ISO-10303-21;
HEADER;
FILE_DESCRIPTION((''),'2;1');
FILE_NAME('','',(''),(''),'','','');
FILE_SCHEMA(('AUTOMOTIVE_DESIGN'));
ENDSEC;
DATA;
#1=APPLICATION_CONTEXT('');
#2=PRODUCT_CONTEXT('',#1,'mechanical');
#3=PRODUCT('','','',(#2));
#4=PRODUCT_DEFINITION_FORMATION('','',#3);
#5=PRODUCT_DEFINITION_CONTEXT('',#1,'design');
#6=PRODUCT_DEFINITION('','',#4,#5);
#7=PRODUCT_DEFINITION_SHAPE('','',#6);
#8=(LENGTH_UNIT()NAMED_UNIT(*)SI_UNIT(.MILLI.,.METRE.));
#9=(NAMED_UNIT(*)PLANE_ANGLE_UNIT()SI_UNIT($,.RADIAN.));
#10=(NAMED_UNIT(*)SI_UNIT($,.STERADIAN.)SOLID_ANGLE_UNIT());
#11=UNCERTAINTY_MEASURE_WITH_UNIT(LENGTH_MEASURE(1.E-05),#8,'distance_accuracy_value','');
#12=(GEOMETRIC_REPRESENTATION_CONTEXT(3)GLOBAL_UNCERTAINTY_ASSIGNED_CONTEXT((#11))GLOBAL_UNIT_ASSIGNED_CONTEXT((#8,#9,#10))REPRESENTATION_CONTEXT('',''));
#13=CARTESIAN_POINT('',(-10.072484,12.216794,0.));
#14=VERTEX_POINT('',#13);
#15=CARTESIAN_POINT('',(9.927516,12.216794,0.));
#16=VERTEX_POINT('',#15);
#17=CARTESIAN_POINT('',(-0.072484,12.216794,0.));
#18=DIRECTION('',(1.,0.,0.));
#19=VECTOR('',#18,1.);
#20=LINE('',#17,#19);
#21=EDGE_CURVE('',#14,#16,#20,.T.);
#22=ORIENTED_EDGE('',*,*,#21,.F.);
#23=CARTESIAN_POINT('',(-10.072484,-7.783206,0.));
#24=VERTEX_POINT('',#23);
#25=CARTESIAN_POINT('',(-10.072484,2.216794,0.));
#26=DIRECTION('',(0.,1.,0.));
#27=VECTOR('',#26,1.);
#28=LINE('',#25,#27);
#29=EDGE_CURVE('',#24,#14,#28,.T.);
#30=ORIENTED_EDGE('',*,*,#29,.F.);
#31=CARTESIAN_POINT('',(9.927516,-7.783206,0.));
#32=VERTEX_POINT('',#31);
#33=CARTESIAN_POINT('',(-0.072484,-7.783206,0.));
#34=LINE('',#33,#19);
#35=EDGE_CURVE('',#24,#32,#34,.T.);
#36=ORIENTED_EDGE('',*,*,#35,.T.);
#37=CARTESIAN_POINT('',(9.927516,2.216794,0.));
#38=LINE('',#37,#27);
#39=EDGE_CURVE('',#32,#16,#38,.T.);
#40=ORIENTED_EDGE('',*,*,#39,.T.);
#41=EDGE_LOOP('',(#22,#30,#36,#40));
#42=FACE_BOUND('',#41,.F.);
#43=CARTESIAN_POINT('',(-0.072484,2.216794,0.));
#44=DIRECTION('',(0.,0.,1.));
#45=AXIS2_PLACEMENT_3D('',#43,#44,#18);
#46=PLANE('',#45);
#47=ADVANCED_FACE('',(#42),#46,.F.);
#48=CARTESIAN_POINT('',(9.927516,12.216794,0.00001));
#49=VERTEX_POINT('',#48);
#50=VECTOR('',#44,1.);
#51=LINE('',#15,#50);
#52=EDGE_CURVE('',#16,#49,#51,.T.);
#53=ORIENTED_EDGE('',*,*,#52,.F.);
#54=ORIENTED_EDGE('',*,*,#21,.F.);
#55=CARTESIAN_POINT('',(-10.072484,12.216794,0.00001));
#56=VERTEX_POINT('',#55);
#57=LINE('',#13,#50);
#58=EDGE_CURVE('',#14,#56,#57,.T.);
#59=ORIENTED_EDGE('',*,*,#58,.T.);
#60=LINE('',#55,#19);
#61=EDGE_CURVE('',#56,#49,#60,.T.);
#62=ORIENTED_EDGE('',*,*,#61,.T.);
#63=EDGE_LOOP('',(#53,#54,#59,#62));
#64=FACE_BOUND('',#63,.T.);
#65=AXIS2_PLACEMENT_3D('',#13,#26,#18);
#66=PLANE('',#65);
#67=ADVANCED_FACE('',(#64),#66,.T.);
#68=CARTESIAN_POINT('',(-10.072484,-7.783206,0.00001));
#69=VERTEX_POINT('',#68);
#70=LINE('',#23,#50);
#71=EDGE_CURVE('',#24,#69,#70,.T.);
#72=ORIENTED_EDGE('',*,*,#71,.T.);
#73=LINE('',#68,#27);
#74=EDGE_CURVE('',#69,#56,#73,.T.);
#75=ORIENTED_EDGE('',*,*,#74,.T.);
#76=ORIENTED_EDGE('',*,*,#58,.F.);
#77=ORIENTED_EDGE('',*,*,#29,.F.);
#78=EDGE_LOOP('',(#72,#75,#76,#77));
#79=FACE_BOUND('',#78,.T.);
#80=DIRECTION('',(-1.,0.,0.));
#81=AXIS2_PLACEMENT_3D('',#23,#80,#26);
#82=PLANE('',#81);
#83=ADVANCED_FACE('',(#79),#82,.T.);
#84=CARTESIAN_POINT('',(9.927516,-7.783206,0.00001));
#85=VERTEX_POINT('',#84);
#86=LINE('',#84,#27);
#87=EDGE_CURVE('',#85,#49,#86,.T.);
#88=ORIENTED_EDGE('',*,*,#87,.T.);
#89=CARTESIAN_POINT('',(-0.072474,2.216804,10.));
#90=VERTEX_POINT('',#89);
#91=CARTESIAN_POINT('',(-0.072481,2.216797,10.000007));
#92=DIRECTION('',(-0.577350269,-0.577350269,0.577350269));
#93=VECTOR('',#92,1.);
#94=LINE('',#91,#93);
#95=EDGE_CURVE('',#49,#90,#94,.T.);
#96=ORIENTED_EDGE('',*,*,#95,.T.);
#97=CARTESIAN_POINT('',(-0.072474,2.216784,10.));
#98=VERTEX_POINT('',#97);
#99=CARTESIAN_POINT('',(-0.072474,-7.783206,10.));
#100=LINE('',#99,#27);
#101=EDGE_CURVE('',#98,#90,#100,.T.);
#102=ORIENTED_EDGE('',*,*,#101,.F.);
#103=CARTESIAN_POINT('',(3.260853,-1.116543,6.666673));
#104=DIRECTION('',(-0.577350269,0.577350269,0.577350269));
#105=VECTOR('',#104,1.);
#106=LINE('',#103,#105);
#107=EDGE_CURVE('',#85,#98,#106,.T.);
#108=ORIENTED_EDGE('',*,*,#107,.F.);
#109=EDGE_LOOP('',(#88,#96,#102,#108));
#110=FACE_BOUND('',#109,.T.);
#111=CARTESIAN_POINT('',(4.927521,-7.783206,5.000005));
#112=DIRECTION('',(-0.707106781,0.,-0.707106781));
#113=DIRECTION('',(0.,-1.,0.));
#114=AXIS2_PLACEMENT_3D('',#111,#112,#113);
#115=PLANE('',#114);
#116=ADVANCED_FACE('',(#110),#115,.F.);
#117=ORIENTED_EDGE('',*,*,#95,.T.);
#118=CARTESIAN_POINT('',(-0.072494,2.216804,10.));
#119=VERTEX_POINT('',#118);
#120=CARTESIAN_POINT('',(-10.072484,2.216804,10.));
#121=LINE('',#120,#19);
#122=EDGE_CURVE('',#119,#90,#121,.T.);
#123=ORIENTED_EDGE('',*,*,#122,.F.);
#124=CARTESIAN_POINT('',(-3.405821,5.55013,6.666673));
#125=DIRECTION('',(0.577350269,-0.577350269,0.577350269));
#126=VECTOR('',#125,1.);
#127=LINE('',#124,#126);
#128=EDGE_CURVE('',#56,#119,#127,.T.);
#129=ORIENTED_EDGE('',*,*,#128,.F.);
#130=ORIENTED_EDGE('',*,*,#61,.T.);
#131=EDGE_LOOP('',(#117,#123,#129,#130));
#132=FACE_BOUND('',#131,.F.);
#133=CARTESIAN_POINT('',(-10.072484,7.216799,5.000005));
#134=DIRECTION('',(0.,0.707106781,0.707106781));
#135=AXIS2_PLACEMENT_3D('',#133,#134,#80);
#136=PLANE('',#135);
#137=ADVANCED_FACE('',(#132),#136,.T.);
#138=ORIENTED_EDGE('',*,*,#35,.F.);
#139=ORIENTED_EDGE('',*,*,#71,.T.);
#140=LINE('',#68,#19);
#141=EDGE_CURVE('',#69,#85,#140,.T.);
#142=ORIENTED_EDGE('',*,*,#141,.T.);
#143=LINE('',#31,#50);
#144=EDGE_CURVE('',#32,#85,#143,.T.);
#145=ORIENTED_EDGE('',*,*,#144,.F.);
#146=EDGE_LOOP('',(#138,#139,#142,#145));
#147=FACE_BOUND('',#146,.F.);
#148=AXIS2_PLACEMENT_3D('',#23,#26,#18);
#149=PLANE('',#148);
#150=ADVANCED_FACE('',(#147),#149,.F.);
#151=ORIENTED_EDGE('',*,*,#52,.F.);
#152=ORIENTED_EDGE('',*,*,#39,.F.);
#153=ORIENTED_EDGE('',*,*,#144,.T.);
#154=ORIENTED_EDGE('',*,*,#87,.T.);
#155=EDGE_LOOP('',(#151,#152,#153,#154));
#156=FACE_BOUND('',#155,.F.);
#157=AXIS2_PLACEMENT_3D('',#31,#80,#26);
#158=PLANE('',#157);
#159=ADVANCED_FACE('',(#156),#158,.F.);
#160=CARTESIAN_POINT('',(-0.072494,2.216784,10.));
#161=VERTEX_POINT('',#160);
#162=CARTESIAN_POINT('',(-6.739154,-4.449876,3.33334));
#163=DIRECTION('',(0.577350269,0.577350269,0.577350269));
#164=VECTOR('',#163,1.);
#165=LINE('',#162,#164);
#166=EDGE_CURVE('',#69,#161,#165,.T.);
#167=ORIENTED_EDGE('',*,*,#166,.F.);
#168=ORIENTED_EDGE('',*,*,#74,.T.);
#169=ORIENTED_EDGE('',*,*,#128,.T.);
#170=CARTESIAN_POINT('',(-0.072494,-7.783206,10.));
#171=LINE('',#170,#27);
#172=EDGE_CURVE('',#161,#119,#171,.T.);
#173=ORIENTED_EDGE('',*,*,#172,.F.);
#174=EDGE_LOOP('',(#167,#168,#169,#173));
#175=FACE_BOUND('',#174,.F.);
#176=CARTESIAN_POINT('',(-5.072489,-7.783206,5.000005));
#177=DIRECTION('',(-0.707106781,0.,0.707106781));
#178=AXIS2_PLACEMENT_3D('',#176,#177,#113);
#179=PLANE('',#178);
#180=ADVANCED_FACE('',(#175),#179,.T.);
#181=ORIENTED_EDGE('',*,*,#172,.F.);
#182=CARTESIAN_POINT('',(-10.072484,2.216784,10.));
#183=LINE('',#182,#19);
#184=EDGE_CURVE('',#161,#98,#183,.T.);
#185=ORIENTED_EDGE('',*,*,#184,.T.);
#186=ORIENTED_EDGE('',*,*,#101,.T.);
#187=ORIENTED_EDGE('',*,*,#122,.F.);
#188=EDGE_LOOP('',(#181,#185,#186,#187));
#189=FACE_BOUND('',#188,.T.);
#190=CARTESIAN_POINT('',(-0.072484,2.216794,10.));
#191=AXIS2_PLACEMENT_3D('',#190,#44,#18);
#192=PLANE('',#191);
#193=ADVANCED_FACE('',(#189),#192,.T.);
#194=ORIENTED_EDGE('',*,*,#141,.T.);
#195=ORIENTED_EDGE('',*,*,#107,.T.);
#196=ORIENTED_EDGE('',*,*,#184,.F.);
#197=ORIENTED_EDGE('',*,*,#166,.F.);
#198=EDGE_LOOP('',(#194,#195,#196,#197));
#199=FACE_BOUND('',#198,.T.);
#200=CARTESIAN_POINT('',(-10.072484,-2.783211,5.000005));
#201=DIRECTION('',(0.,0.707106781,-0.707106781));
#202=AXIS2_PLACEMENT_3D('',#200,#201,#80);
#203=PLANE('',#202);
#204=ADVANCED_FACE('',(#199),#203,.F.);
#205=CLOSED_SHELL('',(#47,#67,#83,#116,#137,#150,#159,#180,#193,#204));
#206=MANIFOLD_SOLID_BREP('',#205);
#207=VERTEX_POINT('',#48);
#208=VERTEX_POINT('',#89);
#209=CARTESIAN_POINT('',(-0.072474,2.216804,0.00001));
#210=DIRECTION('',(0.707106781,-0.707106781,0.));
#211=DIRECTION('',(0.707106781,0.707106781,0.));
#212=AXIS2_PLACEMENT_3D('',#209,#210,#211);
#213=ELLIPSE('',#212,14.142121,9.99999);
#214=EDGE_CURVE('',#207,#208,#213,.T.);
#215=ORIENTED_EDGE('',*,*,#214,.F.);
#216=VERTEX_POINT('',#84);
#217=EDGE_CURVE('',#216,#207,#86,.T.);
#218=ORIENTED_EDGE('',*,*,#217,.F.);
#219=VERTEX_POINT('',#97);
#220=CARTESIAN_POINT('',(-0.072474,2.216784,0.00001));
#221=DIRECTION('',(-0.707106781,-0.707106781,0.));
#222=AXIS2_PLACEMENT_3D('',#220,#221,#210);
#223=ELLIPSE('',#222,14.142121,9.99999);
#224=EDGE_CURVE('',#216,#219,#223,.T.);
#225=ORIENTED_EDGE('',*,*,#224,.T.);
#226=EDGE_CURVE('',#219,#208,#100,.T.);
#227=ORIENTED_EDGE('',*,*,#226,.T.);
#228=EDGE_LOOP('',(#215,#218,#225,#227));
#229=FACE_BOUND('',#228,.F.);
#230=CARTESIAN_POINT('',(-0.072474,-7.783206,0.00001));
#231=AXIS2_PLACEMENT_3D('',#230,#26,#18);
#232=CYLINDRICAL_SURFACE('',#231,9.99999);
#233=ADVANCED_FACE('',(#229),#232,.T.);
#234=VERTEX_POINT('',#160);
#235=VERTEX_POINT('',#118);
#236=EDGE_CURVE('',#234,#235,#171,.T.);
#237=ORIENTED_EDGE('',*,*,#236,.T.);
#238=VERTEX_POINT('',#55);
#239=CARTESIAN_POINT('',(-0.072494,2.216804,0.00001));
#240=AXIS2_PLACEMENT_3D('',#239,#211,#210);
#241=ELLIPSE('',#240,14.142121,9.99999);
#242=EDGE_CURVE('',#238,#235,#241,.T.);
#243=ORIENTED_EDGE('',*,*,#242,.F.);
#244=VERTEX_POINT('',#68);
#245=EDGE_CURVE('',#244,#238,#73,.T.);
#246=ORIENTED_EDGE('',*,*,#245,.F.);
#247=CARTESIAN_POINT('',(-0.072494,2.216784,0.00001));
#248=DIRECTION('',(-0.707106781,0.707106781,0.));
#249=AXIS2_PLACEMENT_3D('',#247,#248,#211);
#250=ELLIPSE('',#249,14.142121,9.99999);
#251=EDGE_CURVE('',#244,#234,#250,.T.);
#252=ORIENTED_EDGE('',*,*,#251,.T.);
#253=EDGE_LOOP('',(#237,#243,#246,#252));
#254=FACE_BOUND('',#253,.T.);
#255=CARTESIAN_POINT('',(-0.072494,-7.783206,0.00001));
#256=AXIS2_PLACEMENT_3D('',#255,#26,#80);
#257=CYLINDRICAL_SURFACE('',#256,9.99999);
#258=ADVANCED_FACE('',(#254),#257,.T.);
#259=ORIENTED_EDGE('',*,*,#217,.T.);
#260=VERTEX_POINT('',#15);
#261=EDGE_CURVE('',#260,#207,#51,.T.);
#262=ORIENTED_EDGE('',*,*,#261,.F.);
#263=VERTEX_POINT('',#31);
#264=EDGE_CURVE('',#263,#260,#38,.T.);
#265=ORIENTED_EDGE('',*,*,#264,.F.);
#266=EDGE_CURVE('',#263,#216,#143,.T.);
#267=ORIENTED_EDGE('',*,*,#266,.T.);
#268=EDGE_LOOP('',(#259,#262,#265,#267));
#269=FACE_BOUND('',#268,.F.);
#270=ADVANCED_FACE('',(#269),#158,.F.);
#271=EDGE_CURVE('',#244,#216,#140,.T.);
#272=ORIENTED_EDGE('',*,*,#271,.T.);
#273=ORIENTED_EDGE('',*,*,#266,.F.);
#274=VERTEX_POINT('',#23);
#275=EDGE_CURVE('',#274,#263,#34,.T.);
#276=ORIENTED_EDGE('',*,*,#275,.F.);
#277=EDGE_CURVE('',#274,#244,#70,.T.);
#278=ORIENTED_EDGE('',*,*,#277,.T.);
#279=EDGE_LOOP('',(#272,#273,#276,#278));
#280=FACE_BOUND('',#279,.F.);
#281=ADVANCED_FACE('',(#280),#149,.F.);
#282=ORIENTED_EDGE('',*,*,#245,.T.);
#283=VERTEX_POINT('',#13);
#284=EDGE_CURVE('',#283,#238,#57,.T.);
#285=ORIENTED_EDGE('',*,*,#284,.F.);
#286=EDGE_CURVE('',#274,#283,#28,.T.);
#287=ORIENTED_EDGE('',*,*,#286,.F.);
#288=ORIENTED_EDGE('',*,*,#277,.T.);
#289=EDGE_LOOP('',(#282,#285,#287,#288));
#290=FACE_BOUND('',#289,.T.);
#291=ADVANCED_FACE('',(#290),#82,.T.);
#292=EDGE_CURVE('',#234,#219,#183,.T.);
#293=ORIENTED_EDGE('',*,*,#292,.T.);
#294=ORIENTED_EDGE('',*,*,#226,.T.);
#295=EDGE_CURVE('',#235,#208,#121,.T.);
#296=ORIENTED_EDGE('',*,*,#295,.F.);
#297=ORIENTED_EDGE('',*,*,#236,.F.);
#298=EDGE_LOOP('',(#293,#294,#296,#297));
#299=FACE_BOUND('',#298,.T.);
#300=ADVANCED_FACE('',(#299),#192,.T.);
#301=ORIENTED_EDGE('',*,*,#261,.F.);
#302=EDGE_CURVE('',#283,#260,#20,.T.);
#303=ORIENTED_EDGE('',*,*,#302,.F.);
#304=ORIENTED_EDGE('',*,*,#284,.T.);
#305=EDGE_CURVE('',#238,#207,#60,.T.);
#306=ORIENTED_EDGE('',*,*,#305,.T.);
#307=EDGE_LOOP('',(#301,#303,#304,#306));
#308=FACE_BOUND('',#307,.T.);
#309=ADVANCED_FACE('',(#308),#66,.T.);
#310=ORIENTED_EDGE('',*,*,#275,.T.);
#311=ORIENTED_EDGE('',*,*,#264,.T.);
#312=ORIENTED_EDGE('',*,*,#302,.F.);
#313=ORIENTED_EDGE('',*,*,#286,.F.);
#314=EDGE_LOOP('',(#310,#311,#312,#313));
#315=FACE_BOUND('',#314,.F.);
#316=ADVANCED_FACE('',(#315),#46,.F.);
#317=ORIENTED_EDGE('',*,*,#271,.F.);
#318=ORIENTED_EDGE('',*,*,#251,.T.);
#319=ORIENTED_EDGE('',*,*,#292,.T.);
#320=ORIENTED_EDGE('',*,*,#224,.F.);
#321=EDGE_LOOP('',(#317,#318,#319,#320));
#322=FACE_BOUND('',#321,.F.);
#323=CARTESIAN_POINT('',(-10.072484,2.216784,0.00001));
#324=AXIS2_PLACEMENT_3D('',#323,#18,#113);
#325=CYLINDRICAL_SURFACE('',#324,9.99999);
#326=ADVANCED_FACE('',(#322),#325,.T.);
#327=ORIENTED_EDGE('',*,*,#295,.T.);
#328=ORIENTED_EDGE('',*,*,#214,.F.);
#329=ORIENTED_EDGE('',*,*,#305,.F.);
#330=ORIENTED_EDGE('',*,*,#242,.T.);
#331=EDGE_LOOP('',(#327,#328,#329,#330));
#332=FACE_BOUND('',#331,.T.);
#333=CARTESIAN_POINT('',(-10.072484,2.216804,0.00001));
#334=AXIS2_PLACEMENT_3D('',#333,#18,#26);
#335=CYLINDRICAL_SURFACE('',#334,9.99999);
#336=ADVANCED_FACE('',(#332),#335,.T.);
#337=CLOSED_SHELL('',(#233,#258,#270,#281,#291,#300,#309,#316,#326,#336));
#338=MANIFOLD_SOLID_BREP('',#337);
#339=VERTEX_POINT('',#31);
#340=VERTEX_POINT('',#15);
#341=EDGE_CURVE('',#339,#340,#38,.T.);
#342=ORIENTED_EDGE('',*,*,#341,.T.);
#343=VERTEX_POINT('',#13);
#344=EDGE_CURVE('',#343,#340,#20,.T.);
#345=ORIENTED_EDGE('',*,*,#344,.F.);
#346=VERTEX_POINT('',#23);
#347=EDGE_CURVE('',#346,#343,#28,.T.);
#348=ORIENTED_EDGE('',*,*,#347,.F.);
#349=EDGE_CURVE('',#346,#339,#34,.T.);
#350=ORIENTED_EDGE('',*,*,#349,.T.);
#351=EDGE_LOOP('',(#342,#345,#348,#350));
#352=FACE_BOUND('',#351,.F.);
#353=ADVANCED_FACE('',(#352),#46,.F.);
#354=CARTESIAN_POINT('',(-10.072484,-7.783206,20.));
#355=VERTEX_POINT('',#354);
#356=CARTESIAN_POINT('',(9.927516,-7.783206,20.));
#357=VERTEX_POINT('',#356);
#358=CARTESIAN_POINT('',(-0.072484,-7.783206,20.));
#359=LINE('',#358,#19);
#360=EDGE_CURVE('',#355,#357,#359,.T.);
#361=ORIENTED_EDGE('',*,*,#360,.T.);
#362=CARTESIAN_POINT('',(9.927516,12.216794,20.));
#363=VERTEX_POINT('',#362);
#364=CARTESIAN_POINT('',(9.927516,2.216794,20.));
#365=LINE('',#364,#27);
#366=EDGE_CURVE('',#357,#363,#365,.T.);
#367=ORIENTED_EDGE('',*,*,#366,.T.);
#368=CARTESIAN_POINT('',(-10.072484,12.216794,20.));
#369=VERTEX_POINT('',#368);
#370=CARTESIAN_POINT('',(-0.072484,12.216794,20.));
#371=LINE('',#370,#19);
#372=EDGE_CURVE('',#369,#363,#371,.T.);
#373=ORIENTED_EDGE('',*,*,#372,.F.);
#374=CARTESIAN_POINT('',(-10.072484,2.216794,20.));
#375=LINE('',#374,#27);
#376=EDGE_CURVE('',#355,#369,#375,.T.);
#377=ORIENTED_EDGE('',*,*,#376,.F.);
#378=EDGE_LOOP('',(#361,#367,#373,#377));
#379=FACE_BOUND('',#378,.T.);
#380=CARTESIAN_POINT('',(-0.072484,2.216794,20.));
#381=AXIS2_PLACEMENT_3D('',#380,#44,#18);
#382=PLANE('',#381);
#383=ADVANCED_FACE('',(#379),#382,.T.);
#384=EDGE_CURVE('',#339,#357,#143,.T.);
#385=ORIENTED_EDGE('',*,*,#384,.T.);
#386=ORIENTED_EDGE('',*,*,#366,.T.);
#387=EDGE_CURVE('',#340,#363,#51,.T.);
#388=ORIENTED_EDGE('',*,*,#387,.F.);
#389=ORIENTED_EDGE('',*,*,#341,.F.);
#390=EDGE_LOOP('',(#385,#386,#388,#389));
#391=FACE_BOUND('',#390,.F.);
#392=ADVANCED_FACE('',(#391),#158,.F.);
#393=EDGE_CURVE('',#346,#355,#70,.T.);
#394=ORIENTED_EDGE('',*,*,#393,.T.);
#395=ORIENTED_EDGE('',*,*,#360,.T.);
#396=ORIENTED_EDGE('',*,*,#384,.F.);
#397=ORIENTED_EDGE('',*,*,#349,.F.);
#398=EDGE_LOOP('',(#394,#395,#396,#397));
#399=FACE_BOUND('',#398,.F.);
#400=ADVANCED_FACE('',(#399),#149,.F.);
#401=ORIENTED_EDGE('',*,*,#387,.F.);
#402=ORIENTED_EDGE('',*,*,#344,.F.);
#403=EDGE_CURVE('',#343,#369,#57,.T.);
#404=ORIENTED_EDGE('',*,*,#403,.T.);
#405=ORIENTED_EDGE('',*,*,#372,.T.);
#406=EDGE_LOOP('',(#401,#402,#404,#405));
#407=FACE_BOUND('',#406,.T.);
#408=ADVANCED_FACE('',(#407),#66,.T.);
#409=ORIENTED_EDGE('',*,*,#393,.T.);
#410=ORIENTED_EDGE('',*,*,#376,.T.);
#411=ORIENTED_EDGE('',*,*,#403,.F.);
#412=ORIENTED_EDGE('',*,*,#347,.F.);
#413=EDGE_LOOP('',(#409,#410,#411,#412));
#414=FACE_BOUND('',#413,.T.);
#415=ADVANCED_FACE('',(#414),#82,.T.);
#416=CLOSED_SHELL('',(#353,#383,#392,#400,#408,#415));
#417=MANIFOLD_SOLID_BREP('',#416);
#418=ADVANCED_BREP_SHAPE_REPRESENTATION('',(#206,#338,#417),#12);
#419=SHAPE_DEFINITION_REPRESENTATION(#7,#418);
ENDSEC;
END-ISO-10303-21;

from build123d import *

# Parameters (mm, degrees)
F0_W     = 20
F0_H     = 20
F1_DEPTH = 20
F2_DEPTH = 10
F3_SIZE  = 9.99999
F4_DEPTH = 10
F5_R     = 9.99999


# Not quite as in the source:
# - a fillet or chamfer is up to 0.001 mm smaller than in the source, because OpenCascade refuses the exact size


with BuildPart() as f1:
    # F0 (on Top) → F1 (new body)
    with BuildSketch(Plane.XY):
        with Locations((-0.0724839047, 2.2167936491)):
            Rectangle(F0_W, F0_H)
    extrude(amount=F1_DEPTH)


with BuildPart() as f2:
    # F0 (on Top) → F2 (new body)
    with BuildSketch(Plane.XY):
        with Locations((-0.0724839047, 2.2167936491)):
            Rectangle(F0_W, F0_H)
    extrude(amount=F2_DEPTH)

    # F3 (size 10 in the source; OpenCascade refuses exactly that, so slightly less here)
    f3_edges = [f2.edges().sort_by_distance(p)[0] for p in [
        (-0.072484, 12.216794, 10),
        (-10.072484, 2.216794, 10),
        (-0.072484, -7.783206, 10),
        (9.927516, 2.216794, 10),
    ]]
    chamfer(f3_edges, length=F3_SIZE)


with BuildPart() as f4:
    # F0 (on Top) → F4 (new body)
    with BuildSketch(Plane.XY):
        with Locations((-0.0724839047, 2.2167936491)):
            Rectangle(F0_W, F0_H)
    extrude(amount=F4_DEPTH)

    # F5 (radius 10 in the source; OpenCascade refuses exactly that, so slightly less here)
    f5_edges = [f4.edges().sort_by_distance(p)[0] for p in [
        (-0.072484, 12.216794, 10),
        (-10.072484, 2.216794, 10),
        (-0.072484, -7.783206, 10),
        (9.927516, 2.216794, 10),
    ]]
    fillet(f5_edges, radius=F5_R)


solid = Compound([f1.part, f2.part, f4.part])
